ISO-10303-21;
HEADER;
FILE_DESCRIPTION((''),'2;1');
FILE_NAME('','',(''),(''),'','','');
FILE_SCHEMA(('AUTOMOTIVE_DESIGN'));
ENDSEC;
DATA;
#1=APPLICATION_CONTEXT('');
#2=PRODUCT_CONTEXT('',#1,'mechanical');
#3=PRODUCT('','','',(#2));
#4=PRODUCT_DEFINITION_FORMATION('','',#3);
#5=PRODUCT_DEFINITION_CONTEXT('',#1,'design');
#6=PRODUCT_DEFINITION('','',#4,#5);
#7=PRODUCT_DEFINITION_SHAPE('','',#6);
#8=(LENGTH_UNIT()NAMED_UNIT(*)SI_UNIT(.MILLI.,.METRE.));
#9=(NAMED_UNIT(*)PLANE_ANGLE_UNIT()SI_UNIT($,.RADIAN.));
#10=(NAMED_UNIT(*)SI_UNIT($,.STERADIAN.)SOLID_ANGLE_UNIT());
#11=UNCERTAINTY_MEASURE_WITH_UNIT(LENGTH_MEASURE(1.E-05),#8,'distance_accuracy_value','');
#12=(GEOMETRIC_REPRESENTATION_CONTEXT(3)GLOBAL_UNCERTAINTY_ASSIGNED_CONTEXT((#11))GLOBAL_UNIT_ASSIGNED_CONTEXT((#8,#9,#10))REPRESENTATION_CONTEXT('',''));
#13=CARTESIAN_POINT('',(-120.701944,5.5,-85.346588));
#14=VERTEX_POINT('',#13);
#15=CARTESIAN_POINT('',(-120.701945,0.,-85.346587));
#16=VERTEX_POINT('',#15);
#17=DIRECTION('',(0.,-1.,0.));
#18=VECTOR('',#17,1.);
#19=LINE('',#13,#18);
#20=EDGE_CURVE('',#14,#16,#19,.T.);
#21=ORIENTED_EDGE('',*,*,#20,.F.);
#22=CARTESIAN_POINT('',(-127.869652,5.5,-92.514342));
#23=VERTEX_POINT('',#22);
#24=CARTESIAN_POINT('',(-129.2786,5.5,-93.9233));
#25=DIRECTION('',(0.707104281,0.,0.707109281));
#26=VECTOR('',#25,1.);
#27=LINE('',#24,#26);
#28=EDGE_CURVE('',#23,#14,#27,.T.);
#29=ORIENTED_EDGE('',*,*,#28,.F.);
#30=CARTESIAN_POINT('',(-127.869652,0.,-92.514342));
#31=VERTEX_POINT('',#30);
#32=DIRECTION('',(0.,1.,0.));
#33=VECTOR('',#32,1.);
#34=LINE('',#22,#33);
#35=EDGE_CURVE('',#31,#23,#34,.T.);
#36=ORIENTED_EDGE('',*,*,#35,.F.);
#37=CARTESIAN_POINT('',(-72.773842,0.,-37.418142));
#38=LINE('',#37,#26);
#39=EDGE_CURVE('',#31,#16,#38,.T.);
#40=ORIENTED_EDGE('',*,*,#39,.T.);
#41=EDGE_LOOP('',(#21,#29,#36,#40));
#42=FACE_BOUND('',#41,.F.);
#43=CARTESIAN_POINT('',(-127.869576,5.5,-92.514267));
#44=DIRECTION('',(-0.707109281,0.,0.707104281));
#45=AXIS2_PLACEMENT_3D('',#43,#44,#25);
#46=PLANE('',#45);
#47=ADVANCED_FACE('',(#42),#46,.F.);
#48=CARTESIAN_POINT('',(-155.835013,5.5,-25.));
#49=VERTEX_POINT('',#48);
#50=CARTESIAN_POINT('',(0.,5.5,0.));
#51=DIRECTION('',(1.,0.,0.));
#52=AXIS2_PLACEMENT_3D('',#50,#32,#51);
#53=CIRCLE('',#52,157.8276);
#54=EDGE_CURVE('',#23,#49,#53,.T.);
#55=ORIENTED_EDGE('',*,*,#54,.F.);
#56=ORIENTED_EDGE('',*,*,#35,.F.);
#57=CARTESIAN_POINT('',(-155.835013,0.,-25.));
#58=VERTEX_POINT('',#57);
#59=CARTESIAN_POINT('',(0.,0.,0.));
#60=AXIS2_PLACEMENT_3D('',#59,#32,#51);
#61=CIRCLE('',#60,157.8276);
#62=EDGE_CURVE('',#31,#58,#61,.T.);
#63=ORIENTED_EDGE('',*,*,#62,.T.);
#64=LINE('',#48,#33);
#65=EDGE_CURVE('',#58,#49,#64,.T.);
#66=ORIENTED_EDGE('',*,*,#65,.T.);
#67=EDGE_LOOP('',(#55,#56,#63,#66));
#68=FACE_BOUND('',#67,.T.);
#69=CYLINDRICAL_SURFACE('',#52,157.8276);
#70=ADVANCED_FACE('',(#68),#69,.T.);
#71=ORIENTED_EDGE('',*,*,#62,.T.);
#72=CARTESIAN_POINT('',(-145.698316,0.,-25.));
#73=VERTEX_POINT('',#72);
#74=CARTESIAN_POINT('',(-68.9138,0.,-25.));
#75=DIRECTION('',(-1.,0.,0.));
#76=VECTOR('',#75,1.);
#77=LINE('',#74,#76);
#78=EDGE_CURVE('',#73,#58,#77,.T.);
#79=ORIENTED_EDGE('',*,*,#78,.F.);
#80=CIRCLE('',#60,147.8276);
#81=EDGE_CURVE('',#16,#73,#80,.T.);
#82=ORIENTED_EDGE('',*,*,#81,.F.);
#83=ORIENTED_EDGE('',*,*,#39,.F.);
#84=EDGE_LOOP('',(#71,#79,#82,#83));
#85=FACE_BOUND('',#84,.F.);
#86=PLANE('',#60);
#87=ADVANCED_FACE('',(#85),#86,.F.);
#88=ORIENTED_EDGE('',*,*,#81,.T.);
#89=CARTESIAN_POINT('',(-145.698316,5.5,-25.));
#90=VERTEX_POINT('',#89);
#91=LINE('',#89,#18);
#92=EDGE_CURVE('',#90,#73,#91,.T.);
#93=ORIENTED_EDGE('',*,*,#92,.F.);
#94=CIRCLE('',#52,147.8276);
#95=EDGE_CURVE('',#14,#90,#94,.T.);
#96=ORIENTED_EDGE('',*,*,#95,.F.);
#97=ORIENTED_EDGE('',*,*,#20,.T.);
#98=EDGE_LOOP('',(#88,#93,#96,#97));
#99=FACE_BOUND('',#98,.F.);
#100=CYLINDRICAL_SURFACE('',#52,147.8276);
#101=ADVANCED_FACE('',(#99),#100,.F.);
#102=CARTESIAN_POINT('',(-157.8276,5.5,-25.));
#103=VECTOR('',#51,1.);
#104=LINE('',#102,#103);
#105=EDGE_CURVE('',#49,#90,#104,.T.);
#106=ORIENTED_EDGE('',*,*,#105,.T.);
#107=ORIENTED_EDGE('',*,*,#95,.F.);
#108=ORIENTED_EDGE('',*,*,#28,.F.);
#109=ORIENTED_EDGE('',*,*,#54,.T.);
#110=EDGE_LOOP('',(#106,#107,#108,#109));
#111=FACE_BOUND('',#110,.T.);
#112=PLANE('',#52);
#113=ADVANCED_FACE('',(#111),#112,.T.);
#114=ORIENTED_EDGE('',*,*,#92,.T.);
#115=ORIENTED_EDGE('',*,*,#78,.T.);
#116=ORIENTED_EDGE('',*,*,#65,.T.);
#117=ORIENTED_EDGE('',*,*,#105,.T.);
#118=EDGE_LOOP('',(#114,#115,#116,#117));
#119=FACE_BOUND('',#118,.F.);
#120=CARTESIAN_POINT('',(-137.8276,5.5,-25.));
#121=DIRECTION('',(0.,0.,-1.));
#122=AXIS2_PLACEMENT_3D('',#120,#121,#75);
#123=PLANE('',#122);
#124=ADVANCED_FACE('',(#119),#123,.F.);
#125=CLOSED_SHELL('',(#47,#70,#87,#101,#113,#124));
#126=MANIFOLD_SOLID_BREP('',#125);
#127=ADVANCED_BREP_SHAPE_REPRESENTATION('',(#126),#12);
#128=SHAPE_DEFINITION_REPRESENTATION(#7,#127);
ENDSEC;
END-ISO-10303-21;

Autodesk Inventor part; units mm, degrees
ref_plane "YZ Plane" through (0, 0, 0) normal (1, 0, 0) x (0, 1, 0)
ref_plane "XZ Plane" through (0, 0, 0) normal (0, 1, 0) x (-1, 0, 0)
ref_plane "XY Plane" through (0, 0, 0) normal (0, 0, 1) x (1, 0, 0)
sketch "スケッチ1" plane through (0, 0, 0) normal (0, 1, 0) x (-1, 0, 0)
  circle A0 centre (0, 0) radius 178.1675
  circle A1 centre (0, 0) radius 157.8276
  line L0 (168.1877, 0) -> (166.7488, -21.9529)
  line L1 (168.1877, 0) -> (130.1721, 2.4917) construction
  line L2 (249.4344, 0) -> (-249.4344, 0) projected
  line L3 (166.7488, -21.9529) -> (156.7702, -21.2989)
  line L4 (156.7702, -21.2989) -> (158.2091, 0.654) construction
  line L5 (158.2091, 0.654) -> (168.1877, 0)
  line L6 (157.4896, -10.3224) -> (0, 0)
  line L7 (166.7488, -21.9529) -> (162.4568, -43.5302)
  line L8 (162.4568, -43.5302) -> (152.649, -41.5793) construction
  line L9 (152.649, -41.5793) -> (156.9409, -20.002) construction
  line L10 (156.9409, -20.002) -> (166.7488, -21.9529) construction
  line L11 (162.4568, -43.5302) -> (155.3851, -64.3626)
  line L12 (155.3851, -64.3626) -> (145.9158, -61.1482) construction
  line L13 (145.9158, -61.1482) -> (152.9875, -40.3158) construction
  line L14 (152.9875, -40.3158) -> (162.4568, -43.5302) construction
  line L15 (155.3851, -64.3626) -> (145.6548, -84.0938)
  line L16 (145.6548, -84.0938) -> (136.6861, -79.6709) construction
  line L17 (136.6861, -79.6709) -> (146.4164, -59.9397) construction
  line L18 (146.4164, -59.9397) -> (155.3851, -64.3626) construction
  line L19 (0, 0) -> (111.6009, -111.6009)
  line L20 (145.6548, -84.0938) -> (137.3401, -78.5381) construction
  line L21 (137.3401, -78.5381) -> (125.1176, -96.8305) construction
  line L22 (125.1176, -96.8305) -> (133.4323, -102.3862) construction
  line L23 (133.4323, -102.3862) -> (145.6548, -84.0938)
  line L24 (133.4323, -102.3862) -> (125.9139, -95.7927) construction
  line L25 (125.9139, -95.7927) -> (111.4082, -112.3332) construction
  line L26 (111.4082, -112.3332) -> (118.9266, -118.9266)
  line L27 (118.9266, -118.9266) -> (133.4323, -102.3862)
  line L28 (111.6009, -111.6009) -> (118.9266, -118.9266)
  line L29 (166.7488, -21.9529) -> (176.7274, -22.6069) construction
  line L30 (118.9266, -118.9266) -> (125.9834, -125.9834)
  point P0 (154.795, -30.7906)
  point P1 (149.4517, -50.732)
  point P2 (141.5512, -69.8053)
  point P3 (131.2288, -87.6843)
  point P4 (118.661, -104.0629)
  point P5 (157.8276, 0)
  point P6 (178.1675, 0)
  dimension "d0" = 22
  dimension "d1" = 10
  dimension "d2" = 45
  dimension "d4" = 315.6551
extrude "押し出し1" add sketch "スケッチ1" along normal blind 5.5 contours L30 L27 L23 L15 L11 L7 L0 L2 A0 | L28 A1 L2 L0 L7 L11 L15 L23 L27
sketch "スケッチ2" plane through (0, 5.5, 0) normal (0, 1, 0) x (1, 0, 0)
  circle A0 centre (0, 0) radius 309.8276
  line L0 (-168.1877, 0) -> (-166.7488, 21.9529) projected
  line L1 (-166.7488, 21.9529) -> (-162.4568, 43.5302) projected
  line L2 (-162.4568, 43.5302) -> (-155.3851, 64.3626) projected
  line L3 (-155.3851, 64.3626) -> (-145.6548, 84.0938) projected
  line L4 (-133.4323, 102.3862) -> (-145.6548, 84.0938) projected
  line L5 (-118.9266, 118.9266) -> (-133.4323, 102.3862) projected
  line L6 (-167.4682, 10.9764) -> (-166.0294, 32.9293)
  line L7 (-166.0294, 32.9293) -> (-275.7938, 40.1237)
  line L8 (-275.7938, 40.1237) -> (-277.2327, 18.1708)
  line L9 (-277.2327, 18.1708) -> (-167.4682, 10.9764)
  line L10 (-164.6028, 32.7415) -> (-160.3108, 54.3188)
  line L11 (-160.3108, 54.3188) -> (-268.1972, 75.7787)
  line L12 (-268.1972, 75.7787) -> (-272.4892, 54.2015)
  line L13 (-272.4892, 54.2015) -> (-164.6028, 32.7415)
  circle A1 centre (-166.7488, 21.9529) radius 11
  circle A2 centre (-162.4568, 43.5302) radius 11
  line L14 (-158.921, 53.9464) -> (-151.8493, 74.7789)
  line L15 (-151.8493, 74.7789) -> (-256.0116, 110.1372)
  line L16 (-256.0116, 110.1372) -> (-263.0833, 89.3047)
  line L17 (-263.0833, 89.3047) -> (-158.921, 53.9464)
  circle A3 centre (-155.3851, 64.3626) radius 11
  arc A4 (-275.7591, 62.4834) -> (-281.3553, 41.7349) centre (-166.7488, 21.9529) ccw
  line L18 (-178.1663, 0.654) -> (-158.2091, -0.654)
  line L19 (-158.2091, -0.654) -> (-156.7702, 21.2989)
  line L20 (-156.7702, 21.2989) -> (-176.7274, 22.6069)
  line L21 (-176.7274, 22.6069) -> (-178.1663, 0.654)
  line L22 (-177.4468, 11.6305) -> (-275.7938, 40.1237)
  line L23 (-176.7274, 22.6069) -> (-176.008, 33.5834)
  line L24 (-176.008, 33.5834) -> (-275.7591, 62.4834)
  line L25 (-275.7938, 40.1237) -> (-281.3553, 41.7349)
  circle A5 centre (0, 0) radius 137.8276
  line L26 (0, 0) -> (-219.0812, 219.0812)
  line L27 (-111.6009, 111.6009) -> (-125.9834, 125.9834) projected
  line L28 (-433.7586, 0) -> (433.7586, 0) projected
  circle A6 centre (0, 0) radius 279.8276 construction
  arc A7 (-111.6009, 111.6009) -> (-157.8276, 0) centre (0, 0) ccw projected
  point P0 (-158.1662, 0)
  point P1 (-137.8276, 0)
  point P2 (-97.4588, 97.4588)
  point P3 (-309.8276, 0)
  dimension "d7" = 22
  dimension "d10" = 20
  dimension "d11" = 100
  dimension "d12" = 30
  dimension "d14" = 20
  dimension "d17" = 122
extrude "押し出し2" add sketch "スケッチ2" against normal blind 5.5 contours L26 L5 L4 L3 A3 L15 L16 L17 A2 L11 L12 L24 A4 L25 L8 L9 L21 L18 L28 A0 | L18 L21 L9 L0 | L0 A1 L19 L28 | A5 L28 A7 A1 A2 A3 L26 | L26 A7 A3 L3 L4 L5 | A1 L21 L20 L0 | L9 L21 A1 | L0 L20 L19 A1 | L19 A7 L28 | L6 A1 L1 | L20 L23 A1 L6 | L1 A1 A7 L19 L20 | L22 L7 L23 A1 L21 | L9 L8 L22 | A1 L23 L21 | A1 A7 L19 | A7 A3 L2 L3 | A3 A7 | A2 L10 L1 | A1 L7 L24 L13 | A2 A7 A1 | L13 L24 L12 L11 A2 | L1 L2 A2 A7 | A1 L23 L7 | L25 A4 L24 L12 L13 L7 | A7 A1 | A7 A2 A3 | L3 L14 A3 | L10 A2 L2 | L13 L12 L24 | A7 A2 | A3 L14 L2 | L17 L16 L15 A3
sketch "スケッチ3" plane through (0, 5.5, 0) normal (0, 1, 0) x (1, 0, 0)
  circle A0 centre (0, 0) radius 157.8276
  arc A1 (-97.4588, 97.4588) -> (-137.8276, 0) centre (0, 0) ccw projected
  line L0 (-97.4588, 97.4588) -> (-219.0812, 219.0812) projected
  line L1 (-309.8276, 0) -> (-137.8276, 0) projected
  arc A2 (-219.0812, 219.0812) -> (-309.8276, 0) centre (0, 0) ccw projected
  point P0 (-157.8276, 0)
  point P1 (-111.6009, 111.6009)
  dimension "d18" = 20
extrude "押し出し3" cut sketch "スケッチ3" against normal through all contours A0 L1 A2 L0
sketch "スケッチ4" plane through (0, 5.5, 0) normal (0, 1, 0) x (1, 0, 0)
  arc A0 (-111.6009, 111.6009) -> (-157.8276, 0) centre (0, 0) ccw projected
  line L0 (-157.8276, 0) -> (-137.8276, 0)
  line L1 (-137.8276, 0) -> (-137.8276, 25)
  line L2 (-137.8276, 25) -> (-157.8276, 25)
  line L3 (-157.8276, 25) -> (-157.8276, 0)
  arc A1 (-97.4588, 97.4588) -> (-137.8276, 0) centre (0, 0) ccw projected
  line L4 (-97.4588, 97.4588) -> (-111.6009, 111.6009)
  line L5 (-111.6009, 111.6009) -> (-129.2786, 93.9233)
  line L6 (-129.2786, 93.9233) -> (-115.1365, 79.7811)
  line L7 (-115.1365, 79.7811) -> (-97.4588, 97.4588)
  dimension "d21" = 25
  dimension "d22" = 25
extrude "押し出し4" cut sketch "スケッチ4" against normal through all contours L4 L7 L6 A0 | A0 L6 L5 | L2 L1 L0 A0 | A0 L3 L2
fillet "フィレット1" radius 1 2 edges at (-97.4588, 2.75, -97.4588) (-137.8276, 2.75, 0)
sketch "スケッチ5" plane through (0, 5.5, 0) normal (0, 1, 0) x (1, 0, 0)
  circle A0 centre (0, 0) radius 147.8276
  arc A1 (-127.8696, 92.5143) -> (-155.835, 25) centre (0, 0) ccw projected
  arc A2 (-137.8276, 23.48) -> (-135.842, 23.3109) centre (-136.8276, 23.48) ccw projected
  arc A3 (-112.5381, 79.5715) -> (-135.842, 23.3109) centre (0, 0) ccw projected
  arc A4 (-112.5381, 79.5715) -> (-114.0617, 80.8559) centre (-113.3546, 80.1488) ccw projected
  line L0 (-114.0617, 80.8559) -> (-115.1365, 79.7811) projected
  line L1 (-115.1365, 79.7811) -> (-127.8696, 92.5143) projected
  arc A5 (-127.8696, 92.5143) -> (-155.835, 25) centre (0, 0) ccw projected
  line L2 (-155.835, 25) -> (-137.8276, 25) projected
  line L3 (-137.8276, 25) -> (-137.8276, 23.48) projected
  point P0 (-120.7019, 85.3466)
  point P1 (-145.6983, 25)
  dimension "d26" = 10
extrude "押し出し5" cut sketch "スケッチ5" against normal through all contours L1 L0 A4 A3 A2 L3 L2 A0 picked at (-137.0003, 45.2919)
equation "\"d22\" = d21"
properties part number "back_upper" material "木材 (カエデ材)"
